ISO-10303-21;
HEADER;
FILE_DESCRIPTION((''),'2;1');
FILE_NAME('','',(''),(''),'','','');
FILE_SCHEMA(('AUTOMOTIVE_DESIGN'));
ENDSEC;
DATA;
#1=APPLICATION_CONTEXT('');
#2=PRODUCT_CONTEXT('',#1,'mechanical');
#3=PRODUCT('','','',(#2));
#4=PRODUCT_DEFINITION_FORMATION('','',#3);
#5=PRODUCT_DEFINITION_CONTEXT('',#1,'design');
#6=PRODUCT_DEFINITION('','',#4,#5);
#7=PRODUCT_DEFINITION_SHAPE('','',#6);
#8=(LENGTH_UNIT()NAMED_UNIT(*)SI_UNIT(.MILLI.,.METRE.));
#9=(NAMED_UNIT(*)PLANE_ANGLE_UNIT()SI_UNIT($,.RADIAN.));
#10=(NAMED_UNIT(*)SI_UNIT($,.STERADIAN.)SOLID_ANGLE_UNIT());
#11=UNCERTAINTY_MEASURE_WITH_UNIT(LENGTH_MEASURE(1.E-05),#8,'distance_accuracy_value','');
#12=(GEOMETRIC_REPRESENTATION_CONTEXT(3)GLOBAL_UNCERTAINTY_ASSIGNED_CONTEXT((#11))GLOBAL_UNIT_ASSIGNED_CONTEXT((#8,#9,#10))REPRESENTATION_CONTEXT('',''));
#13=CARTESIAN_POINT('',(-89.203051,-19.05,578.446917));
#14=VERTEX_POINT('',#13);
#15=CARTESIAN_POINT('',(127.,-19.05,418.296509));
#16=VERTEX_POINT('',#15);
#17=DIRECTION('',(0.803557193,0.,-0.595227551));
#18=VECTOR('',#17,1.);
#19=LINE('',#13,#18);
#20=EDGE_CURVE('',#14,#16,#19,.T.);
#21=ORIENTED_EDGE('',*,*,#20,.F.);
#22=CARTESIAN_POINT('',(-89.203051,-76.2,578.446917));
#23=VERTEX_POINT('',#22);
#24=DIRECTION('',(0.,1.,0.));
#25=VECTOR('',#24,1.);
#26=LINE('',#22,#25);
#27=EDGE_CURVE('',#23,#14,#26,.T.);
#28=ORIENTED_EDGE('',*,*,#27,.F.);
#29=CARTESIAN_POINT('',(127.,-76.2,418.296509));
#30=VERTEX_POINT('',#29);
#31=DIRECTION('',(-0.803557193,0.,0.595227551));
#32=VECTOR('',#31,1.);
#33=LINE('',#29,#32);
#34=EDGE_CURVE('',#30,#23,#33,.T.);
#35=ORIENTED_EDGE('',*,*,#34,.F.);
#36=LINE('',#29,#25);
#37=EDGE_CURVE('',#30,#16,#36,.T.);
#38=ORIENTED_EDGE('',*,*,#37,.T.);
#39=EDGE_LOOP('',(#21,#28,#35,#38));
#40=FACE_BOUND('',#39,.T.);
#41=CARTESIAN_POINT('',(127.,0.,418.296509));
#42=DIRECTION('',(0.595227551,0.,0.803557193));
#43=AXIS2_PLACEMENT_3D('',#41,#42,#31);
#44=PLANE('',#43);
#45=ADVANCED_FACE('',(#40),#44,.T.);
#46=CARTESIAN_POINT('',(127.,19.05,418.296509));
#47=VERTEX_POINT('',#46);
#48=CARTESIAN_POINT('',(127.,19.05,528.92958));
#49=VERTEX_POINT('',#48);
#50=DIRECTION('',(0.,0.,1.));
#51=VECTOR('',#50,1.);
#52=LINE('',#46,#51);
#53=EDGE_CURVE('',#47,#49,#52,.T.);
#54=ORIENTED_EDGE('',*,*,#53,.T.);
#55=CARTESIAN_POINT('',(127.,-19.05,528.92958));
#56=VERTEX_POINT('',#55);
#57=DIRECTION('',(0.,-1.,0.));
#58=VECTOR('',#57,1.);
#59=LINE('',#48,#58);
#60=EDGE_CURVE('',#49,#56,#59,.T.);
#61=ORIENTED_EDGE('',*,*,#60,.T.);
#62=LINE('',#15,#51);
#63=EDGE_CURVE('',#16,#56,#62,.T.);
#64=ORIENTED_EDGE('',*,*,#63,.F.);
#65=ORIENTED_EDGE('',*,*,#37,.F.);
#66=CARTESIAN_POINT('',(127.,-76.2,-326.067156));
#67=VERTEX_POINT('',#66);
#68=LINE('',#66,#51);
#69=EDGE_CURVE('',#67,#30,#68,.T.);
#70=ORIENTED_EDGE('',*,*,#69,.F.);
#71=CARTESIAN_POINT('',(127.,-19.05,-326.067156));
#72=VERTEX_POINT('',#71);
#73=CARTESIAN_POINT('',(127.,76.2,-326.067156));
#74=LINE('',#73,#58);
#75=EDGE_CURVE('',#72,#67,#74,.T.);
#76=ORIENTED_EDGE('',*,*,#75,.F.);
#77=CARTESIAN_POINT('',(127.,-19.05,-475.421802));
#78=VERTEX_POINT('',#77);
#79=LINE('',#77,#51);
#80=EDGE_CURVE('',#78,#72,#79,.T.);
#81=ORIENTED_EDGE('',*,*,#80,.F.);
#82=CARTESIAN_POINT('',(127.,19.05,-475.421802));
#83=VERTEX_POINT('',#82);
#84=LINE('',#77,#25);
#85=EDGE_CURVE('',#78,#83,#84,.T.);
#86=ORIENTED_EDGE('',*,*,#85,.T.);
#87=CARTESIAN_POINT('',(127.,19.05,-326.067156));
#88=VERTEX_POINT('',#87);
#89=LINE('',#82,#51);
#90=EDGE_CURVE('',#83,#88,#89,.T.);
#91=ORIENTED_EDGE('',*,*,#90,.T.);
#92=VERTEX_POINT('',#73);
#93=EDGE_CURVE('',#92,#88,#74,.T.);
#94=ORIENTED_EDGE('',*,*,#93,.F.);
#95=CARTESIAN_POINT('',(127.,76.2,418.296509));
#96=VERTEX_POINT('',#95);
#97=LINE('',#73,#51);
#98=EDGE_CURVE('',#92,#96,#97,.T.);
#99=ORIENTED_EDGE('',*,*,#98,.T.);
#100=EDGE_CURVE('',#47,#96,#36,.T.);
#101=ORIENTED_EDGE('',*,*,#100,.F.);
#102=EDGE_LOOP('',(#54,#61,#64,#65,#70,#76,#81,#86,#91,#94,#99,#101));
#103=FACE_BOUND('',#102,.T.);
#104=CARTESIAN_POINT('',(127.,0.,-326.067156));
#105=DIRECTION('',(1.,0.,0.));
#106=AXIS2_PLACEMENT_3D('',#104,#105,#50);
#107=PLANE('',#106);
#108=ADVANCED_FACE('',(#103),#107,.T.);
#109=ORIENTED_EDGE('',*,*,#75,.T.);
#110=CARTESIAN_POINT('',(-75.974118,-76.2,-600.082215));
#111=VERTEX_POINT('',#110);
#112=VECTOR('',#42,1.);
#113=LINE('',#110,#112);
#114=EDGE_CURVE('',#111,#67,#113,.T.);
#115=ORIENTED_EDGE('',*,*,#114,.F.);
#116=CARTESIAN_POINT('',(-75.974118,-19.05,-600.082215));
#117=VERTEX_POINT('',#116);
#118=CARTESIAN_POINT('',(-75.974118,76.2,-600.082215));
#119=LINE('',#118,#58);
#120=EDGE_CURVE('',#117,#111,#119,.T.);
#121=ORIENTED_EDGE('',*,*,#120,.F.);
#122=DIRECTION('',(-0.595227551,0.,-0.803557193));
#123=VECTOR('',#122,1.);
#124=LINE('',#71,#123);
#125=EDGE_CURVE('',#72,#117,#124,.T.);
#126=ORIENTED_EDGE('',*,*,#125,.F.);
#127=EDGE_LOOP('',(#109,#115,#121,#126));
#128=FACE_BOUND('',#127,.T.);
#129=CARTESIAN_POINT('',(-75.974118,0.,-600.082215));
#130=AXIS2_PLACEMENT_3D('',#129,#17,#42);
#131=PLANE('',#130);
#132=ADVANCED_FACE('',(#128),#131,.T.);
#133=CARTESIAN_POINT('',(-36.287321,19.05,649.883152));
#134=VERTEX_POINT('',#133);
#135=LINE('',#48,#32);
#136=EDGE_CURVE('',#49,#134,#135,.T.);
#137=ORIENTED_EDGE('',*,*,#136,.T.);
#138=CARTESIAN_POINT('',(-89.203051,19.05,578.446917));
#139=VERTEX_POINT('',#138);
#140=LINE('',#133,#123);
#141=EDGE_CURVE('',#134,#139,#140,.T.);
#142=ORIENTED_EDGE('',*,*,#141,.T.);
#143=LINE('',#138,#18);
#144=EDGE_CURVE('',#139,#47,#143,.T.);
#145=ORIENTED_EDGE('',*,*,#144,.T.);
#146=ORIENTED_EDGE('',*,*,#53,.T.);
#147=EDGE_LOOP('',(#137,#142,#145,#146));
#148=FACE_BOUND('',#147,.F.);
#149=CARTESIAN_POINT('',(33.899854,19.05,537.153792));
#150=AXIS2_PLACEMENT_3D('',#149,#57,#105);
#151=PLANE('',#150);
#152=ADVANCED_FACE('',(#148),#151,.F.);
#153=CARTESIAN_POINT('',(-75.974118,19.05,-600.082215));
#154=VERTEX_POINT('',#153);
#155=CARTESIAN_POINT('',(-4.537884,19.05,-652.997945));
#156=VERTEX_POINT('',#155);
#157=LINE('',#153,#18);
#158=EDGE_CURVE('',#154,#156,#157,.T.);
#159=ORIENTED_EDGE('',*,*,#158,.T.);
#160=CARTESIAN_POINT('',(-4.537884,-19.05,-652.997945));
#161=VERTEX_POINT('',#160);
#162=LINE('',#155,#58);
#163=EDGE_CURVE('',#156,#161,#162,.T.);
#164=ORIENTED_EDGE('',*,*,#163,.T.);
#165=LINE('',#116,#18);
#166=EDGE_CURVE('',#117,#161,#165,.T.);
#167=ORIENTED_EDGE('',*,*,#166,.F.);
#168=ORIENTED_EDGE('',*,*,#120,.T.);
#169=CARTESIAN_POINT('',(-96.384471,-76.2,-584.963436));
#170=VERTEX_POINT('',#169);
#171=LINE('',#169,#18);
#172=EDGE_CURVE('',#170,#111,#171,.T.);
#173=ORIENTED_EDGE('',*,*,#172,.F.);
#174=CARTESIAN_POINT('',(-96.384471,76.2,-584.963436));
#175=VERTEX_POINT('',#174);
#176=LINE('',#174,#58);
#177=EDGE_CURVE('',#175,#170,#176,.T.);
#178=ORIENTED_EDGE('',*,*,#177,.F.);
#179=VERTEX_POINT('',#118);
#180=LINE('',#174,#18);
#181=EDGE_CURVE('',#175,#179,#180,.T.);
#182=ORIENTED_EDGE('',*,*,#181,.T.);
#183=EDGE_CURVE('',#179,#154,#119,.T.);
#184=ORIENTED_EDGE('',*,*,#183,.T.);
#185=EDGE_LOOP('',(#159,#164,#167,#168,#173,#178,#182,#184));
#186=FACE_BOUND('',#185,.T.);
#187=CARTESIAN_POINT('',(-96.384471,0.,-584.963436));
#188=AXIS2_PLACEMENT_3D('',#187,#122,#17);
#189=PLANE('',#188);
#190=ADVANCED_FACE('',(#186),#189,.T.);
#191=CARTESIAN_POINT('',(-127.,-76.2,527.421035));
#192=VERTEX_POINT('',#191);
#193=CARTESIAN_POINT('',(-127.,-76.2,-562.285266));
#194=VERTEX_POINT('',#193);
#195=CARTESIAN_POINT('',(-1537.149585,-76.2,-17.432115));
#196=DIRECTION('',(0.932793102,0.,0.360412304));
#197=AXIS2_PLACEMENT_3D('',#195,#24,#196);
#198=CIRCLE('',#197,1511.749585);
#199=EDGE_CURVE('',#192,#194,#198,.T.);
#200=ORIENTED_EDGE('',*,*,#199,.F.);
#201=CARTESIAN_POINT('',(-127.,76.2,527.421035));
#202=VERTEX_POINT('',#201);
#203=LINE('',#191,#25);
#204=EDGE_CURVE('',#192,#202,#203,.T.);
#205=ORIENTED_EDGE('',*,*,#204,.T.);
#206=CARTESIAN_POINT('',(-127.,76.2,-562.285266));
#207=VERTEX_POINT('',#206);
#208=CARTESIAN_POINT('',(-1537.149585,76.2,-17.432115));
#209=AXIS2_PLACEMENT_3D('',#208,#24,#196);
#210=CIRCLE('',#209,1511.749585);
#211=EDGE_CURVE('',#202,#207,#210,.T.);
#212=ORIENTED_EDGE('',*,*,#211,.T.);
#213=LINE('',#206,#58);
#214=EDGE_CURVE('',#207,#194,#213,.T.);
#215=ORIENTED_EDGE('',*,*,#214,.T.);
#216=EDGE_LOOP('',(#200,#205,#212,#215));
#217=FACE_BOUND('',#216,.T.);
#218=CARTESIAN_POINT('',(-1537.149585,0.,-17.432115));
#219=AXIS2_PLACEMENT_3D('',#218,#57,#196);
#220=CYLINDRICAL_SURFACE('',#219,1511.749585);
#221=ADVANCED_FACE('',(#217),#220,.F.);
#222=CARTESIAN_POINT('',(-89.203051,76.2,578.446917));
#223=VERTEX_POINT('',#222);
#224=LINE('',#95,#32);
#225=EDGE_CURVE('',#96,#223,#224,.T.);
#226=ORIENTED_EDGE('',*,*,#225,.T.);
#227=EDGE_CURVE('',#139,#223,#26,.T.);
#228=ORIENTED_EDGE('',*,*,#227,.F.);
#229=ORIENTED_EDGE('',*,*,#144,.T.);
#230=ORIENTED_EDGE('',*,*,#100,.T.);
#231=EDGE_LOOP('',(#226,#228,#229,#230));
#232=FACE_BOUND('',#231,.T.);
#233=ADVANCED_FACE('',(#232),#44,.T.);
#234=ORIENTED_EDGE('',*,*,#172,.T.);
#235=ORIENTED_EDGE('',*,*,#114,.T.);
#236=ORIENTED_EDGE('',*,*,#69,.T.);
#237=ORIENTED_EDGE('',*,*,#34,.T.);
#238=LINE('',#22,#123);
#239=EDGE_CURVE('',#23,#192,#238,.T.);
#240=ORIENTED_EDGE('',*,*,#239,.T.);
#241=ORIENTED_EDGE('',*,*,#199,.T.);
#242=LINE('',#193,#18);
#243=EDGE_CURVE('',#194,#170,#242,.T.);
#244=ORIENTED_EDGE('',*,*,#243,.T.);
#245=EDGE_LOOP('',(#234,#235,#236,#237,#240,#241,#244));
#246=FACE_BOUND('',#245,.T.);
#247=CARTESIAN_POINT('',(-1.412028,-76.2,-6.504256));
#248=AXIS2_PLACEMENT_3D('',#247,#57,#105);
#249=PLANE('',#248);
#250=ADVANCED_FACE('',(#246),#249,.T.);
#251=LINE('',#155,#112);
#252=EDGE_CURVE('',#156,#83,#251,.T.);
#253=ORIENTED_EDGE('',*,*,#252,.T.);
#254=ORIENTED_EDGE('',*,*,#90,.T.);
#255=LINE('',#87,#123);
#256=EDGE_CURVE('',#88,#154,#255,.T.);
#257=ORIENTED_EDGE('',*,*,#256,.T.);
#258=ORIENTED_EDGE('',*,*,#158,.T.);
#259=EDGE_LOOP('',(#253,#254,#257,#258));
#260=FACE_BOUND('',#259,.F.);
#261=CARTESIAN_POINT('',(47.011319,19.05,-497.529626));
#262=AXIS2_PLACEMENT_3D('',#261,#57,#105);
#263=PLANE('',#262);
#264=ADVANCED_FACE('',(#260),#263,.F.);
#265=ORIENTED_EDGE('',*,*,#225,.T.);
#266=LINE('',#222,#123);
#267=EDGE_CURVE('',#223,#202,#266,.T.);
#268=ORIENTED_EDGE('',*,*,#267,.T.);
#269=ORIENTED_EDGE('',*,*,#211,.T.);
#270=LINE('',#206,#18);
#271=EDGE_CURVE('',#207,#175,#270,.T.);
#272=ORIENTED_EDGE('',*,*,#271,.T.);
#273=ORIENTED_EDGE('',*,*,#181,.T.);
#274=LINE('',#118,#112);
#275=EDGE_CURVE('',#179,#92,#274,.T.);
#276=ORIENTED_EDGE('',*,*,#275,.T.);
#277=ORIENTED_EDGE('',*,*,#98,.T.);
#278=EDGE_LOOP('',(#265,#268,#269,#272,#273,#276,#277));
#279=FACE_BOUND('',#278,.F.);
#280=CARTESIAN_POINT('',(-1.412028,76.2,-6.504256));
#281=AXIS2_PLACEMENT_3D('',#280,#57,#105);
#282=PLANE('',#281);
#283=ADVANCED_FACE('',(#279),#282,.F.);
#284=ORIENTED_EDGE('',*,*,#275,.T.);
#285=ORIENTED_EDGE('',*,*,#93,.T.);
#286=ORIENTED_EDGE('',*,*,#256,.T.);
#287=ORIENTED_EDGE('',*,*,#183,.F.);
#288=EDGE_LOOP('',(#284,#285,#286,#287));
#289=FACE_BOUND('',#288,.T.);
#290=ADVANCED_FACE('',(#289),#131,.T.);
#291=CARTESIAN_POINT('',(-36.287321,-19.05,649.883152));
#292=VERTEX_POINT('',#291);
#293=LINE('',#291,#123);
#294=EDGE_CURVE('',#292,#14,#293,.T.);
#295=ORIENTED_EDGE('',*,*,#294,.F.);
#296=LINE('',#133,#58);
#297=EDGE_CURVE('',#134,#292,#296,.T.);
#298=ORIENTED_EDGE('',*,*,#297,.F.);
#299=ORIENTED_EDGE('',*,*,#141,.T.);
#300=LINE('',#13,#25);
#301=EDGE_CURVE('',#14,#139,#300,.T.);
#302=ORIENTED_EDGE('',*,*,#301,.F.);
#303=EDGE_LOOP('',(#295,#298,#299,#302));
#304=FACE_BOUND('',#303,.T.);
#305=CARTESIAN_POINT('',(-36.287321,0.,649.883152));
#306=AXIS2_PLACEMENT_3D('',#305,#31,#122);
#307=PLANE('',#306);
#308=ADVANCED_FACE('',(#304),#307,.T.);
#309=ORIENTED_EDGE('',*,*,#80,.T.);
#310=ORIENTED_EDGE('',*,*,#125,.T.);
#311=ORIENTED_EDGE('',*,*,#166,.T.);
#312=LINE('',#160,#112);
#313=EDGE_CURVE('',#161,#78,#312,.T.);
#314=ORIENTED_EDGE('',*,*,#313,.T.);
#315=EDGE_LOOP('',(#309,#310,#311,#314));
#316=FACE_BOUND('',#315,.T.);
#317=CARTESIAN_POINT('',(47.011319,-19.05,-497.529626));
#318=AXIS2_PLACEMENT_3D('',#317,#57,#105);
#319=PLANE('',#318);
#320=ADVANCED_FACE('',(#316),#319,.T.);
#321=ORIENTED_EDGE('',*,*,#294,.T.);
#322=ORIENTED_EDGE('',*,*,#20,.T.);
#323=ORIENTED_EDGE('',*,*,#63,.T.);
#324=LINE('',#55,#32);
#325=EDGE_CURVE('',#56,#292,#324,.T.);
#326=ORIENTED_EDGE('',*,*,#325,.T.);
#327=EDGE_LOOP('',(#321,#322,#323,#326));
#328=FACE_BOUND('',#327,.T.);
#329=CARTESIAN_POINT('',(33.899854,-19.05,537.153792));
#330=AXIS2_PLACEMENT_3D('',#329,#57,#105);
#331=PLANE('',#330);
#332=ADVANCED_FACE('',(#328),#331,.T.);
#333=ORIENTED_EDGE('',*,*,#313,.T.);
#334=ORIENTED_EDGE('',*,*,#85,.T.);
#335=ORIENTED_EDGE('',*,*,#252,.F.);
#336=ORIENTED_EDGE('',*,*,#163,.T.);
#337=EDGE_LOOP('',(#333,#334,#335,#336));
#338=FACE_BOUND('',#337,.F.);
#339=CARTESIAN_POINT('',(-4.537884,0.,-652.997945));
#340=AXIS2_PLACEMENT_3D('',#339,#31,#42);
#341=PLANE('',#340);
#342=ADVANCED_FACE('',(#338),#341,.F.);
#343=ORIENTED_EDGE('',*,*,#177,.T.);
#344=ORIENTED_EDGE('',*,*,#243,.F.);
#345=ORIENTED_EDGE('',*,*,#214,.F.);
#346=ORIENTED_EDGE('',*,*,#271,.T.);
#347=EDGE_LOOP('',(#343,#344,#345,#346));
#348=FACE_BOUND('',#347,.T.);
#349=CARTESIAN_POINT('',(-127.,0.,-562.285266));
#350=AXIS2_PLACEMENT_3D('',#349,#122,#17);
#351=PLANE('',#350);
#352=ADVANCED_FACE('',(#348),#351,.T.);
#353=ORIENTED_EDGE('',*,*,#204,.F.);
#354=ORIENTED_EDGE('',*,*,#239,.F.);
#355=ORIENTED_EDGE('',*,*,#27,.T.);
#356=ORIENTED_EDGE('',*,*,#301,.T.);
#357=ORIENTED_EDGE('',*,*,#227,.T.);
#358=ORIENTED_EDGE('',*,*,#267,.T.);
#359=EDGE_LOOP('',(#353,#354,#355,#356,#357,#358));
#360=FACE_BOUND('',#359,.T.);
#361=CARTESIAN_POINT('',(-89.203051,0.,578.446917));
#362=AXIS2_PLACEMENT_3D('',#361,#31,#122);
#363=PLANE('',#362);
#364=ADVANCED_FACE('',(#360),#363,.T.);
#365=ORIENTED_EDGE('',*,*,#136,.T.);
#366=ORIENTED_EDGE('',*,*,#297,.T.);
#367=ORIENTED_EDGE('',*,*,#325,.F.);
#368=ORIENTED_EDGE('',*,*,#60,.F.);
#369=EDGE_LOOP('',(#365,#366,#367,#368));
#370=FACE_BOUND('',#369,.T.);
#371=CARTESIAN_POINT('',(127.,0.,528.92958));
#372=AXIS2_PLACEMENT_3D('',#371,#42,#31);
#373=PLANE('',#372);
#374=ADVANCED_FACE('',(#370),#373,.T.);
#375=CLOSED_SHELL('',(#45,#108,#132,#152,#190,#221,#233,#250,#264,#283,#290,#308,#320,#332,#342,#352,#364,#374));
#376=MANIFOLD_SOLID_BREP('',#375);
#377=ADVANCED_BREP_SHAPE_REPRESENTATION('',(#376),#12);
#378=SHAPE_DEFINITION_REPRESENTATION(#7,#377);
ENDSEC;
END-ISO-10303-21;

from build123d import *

# Parameters (mm, degrees)
F1_DEPTH = 76.2
F2_DEPTH = 19.05


# Not quite as in the source:
# - a feature names something its author has since deleted; it is built from what else it names


with BuildPart() as f1:
    # F0 (on Front) → F1 (new body, symmetric)
    with BuildSketch(Plane.XZ):
        with BuildLine():
            Line((127, 339.2728872618), (-127, 527.42103541))
            ThreePointArc((-127, 527.42103541), (-25.4, -17.4321152174), (-127, -562.2852658447))
            Line((-127, -562.2852658447), (127, -219.3852658447))
            Line((127, -219.3852658447), (127, 339.2728872618))
        make_face()
        Polygon((127, -219.3852658447), (-127, -562.2852658447), (-96.3844709336, -584.9634355236), (127, -283.3943997633), align=None)
        Polygon((-104.3218303212, 558.0365644764), (-127, 527.42103541), (127, 339.2728872618), (127, 386.6870605348), align=None)
        Polygon((127, -283.3943997633), (-96.3844709336, -584.9634355236), (-75.9741182226, -600.0822153095), (127, -326.067155709), align=None)
        Polygon((-89.2030505353, 578.4469171874), (-104.3218303212, 558.0365644764), (127, 386.6870605348), (127, 418.2965093835), align=None)
    extrude(amount=F1_DEPTH, both=True)

    # F0 (on Front) → F2 (join, symmetric)
    with BuildSketch(Plane.XZ):
        Polygon((127, -326.067155709), (-75.9741182226, -600.0822153095), (-4.5378837343, -652.9979445601), (127, -475.4218015188), align=None)
        Polygon((127, 418.2965093835), (127, 528.9295803538), (-36.2873212846, 649.8831516757), (-89.2030505353, 578.4469171874), align=None)
    extrude(amount=F2_DEPTH, both=True)


solid = f1.part
